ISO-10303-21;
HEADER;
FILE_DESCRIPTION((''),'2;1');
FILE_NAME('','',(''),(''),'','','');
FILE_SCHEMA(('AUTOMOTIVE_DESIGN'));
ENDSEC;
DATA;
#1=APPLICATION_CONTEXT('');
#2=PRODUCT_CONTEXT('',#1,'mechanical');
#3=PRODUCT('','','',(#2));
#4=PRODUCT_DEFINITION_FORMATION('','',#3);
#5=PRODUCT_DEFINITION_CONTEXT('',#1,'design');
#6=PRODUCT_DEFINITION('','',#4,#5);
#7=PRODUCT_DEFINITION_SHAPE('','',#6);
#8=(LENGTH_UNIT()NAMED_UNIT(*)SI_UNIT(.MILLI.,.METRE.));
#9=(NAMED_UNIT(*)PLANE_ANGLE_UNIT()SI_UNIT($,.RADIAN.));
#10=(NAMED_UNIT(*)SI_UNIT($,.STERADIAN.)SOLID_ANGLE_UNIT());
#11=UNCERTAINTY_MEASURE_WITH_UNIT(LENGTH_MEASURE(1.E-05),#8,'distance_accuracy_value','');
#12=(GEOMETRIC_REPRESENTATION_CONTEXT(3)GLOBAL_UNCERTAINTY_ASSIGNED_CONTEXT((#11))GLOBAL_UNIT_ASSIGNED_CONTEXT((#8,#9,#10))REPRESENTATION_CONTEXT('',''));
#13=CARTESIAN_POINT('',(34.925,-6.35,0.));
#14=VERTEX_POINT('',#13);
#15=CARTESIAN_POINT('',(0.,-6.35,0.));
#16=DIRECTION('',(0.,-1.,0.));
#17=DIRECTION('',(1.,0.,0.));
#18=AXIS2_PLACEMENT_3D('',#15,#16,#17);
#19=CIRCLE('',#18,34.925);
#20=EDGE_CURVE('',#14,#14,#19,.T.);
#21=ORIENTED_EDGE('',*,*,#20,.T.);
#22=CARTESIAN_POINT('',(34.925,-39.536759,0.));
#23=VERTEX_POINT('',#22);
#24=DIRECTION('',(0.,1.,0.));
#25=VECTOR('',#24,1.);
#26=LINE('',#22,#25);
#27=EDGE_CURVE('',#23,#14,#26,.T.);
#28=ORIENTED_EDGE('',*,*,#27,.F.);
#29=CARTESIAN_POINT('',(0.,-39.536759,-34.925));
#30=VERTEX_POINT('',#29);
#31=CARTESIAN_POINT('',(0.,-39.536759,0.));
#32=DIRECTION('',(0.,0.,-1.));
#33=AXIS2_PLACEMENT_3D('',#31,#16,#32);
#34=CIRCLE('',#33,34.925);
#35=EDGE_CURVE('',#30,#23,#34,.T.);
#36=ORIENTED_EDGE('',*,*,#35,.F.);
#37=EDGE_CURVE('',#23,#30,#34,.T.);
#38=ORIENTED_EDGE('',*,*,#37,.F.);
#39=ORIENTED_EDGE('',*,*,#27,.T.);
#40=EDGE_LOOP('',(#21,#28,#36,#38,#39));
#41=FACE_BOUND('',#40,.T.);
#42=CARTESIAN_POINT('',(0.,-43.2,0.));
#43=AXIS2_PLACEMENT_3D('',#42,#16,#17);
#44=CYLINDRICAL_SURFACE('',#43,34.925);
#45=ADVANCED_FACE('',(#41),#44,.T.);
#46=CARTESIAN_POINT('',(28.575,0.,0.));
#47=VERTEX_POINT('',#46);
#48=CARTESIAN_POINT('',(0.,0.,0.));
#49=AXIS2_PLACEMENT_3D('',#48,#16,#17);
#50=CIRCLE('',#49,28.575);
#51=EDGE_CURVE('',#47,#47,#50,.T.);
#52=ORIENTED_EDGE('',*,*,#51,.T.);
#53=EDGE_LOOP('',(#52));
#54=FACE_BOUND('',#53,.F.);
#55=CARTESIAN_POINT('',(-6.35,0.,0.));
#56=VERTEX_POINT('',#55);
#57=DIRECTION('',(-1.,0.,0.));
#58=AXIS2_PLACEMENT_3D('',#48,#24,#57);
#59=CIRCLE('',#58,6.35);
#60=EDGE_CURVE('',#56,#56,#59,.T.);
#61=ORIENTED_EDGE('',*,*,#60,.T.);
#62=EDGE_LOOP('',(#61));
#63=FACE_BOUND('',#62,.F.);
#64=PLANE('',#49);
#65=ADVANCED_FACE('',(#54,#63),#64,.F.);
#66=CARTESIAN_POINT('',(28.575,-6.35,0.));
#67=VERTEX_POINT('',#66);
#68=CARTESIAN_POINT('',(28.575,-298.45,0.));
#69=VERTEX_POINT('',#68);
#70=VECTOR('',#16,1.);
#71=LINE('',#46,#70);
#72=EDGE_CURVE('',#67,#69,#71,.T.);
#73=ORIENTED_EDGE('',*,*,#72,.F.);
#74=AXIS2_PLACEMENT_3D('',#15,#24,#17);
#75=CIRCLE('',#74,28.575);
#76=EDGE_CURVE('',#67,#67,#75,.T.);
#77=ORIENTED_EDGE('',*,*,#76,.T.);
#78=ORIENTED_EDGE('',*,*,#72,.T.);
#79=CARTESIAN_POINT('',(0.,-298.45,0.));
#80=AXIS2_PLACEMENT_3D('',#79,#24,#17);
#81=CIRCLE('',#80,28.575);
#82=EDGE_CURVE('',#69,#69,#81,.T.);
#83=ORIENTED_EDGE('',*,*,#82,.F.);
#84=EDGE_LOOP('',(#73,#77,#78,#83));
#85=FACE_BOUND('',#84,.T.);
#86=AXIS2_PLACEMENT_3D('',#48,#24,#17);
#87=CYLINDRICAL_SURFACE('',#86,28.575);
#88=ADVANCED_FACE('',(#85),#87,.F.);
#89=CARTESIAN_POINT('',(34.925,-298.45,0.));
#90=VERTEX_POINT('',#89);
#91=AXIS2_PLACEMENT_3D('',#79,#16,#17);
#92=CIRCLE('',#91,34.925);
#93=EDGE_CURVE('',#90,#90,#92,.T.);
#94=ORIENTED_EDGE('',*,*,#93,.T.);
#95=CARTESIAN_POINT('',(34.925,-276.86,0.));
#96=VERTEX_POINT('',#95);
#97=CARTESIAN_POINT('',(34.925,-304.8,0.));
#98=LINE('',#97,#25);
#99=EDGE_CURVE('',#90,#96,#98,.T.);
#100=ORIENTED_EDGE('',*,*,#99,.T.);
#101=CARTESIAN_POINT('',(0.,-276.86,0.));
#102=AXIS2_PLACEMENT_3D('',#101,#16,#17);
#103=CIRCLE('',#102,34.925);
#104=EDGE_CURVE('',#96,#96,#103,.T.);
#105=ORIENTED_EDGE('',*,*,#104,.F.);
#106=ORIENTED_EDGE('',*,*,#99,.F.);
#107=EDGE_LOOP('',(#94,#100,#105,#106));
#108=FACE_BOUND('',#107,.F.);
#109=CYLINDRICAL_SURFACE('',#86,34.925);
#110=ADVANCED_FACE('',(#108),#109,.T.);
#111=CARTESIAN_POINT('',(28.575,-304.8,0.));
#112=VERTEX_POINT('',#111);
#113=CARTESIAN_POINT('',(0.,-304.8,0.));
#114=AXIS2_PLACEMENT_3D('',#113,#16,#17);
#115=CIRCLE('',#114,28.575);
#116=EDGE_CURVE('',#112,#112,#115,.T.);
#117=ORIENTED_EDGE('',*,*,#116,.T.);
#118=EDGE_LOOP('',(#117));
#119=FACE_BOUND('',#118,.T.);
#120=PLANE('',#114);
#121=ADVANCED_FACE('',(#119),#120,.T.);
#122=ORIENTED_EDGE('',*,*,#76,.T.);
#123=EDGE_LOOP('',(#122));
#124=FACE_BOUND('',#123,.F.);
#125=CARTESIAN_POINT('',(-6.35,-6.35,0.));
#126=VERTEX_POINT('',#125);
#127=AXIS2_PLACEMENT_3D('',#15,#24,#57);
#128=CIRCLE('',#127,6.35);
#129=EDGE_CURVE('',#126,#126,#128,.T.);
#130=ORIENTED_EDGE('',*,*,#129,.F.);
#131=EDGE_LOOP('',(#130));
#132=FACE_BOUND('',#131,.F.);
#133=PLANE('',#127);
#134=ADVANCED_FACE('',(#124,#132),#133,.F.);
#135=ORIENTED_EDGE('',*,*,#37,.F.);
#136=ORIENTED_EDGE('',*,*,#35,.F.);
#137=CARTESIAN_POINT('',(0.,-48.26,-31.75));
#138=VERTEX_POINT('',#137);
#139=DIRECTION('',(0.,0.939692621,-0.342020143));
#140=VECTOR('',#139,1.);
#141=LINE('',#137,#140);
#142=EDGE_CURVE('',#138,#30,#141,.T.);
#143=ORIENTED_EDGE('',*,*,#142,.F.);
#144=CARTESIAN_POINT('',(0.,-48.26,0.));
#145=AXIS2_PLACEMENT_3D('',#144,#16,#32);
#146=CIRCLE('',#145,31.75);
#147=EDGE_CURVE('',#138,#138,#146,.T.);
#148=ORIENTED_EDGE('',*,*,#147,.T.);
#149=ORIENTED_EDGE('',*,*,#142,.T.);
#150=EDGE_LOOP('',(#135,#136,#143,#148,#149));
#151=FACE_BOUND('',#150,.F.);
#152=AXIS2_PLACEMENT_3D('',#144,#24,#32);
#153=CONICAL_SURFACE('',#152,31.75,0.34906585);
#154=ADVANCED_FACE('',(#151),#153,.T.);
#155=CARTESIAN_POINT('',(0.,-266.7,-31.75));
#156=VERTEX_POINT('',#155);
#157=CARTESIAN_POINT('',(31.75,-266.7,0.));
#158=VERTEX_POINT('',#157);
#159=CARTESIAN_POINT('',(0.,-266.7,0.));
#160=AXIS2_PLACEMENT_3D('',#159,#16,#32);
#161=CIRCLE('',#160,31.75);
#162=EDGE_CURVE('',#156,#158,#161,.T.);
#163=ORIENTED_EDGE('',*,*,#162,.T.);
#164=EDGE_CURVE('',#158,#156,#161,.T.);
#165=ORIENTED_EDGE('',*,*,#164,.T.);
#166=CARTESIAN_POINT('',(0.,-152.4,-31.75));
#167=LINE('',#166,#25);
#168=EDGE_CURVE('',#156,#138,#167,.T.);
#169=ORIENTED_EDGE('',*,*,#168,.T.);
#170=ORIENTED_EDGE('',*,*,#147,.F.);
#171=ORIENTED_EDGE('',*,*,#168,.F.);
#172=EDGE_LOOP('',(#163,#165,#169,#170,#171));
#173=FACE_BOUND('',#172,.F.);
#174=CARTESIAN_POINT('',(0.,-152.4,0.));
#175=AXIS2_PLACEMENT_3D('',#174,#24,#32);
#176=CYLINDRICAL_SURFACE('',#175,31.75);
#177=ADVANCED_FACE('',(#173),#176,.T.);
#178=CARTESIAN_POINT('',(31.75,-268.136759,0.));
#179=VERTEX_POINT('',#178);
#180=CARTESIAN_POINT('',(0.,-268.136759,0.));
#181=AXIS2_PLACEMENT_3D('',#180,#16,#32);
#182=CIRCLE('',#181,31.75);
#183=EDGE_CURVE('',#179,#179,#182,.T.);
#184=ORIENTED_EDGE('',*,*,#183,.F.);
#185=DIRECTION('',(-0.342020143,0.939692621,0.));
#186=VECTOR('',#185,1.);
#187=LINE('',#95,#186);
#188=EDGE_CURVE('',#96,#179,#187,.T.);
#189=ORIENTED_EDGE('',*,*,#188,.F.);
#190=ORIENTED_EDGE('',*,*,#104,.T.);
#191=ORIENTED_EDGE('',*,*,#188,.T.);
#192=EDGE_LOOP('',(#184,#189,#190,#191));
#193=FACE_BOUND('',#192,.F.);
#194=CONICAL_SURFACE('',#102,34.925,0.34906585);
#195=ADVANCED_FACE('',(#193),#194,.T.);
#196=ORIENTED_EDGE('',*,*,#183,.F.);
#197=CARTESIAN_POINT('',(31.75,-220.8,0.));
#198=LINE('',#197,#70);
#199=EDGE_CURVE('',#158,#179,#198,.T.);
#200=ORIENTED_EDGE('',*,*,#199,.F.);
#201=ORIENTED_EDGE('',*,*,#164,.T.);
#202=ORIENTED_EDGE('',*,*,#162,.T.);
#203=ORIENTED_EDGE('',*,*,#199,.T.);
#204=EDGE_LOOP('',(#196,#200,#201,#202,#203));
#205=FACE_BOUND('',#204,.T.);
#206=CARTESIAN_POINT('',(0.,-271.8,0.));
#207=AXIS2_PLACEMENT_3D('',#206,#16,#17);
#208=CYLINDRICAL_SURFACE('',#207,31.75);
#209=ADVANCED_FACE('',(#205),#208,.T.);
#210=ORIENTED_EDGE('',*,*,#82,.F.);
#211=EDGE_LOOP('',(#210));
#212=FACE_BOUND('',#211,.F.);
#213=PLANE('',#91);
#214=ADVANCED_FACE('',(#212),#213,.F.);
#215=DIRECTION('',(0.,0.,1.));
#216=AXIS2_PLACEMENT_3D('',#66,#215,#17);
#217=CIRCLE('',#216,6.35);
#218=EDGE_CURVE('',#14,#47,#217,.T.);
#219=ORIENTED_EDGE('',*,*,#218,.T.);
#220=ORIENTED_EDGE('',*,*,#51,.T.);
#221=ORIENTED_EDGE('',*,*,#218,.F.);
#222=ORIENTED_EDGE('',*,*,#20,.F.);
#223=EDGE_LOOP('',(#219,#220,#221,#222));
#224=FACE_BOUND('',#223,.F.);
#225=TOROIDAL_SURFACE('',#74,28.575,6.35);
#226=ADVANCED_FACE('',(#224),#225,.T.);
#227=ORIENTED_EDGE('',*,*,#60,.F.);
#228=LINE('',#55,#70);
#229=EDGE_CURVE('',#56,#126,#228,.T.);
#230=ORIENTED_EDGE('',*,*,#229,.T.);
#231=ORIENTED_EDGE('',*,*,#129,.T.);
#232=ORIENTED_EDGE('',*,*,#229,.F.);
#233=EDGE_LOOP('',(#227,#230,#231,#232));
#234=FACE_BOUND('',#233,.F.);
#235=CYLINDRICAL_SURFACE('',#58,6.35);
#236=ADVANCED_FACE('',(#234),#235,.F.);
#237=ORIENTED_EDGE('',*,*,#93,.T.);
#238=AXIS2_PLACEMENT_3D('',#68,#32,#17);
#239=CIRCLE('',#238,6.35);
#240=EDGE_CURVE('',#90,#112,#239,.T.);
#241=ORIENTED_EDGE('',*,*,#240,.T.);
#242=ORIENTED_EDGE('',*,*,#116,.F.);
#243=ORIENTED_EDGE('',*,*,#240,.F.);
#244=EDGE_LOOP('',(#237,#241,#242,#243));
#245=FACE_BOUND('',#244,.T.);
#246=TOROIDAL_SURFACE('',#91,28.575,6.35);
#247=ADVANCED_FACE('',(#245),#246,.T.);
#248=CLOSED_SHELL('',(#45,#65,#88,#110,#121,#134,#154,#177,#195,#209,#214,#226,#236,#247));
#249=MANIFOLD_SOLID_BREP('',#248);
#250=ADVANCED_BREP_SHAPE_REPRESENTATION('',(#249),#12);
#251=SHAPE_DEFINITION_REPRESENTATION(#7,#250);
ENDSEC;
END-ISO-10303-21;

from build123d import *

# Parameters (mm, degrees)
F0_R          = 34.925
F0_R_2        = 28.575
F1_DEPTH      = 304.8
F2_R          = 34.925
F3_DEPTH      = 6.35
F4_R          = 34.925
F5_DEPTH      = 6.35
F6_R          = 6.35
F7_R          = 6.35
F8_W          = 228.6
F8_H          = 3.175
F10_S5_R      = 34.925
F10_T6_DEPTH  = 52
F10_S11_R     = 31.75
F10_T12_DEPTH = 51
F11_R         = 6.35
F12_DEPTH     = 25.4


# Not quite as in the source:
# - a fillet or chamfer that OpenCascade refuses, or shapes differently, is made with other operations: its cross-section is extruded or revolved along the edge and cut away or added


with BuildPart() as f1:
    # F0 (on Front) → F1 (new body)
    with BuildSketch(Plane.XZ):
        Circle(F0_R)
        Circle(F0_R_2, mode=Mode.SUBTRACT)
    extrude(amount=F1_DEPTH)

    # F2 (on face) → F3 (join)
    with BuildSketch(Plane.XZ.offset(304.8)):
        Circle(F2_R)
    extrude(amount=-F3_DEPTH)

    # F4 (on face) → F5 (join)
    with BuildSketch(Plane(origin=(0, 0, 0), x_dir=(-1, 0, 0), z_dir=(0, 1, 0))):
        Circle(F4_R)
    extrude(amount=-F5_DEPTH)

    # F6
    f6_edges = [f1.edges().sort_by_distance(p)[0] for p in [
        (-34.925, 0, 0),
    ]]
    fillet(f6_edges, radius=F6_R)

    # F7
    f7_edges = [f1.edges().sort_by_distance(p)[0] for p in [
        (-34.925, -304.8, 0),
    ]]
    fillet(f7_edges, radius=F7_R)

    # F8 (on Right) → F9 (revolve, cut)
    with BuildSketch(Plane.YZ):
        with Locations((-152.4, -33.3375)):
            Rectangle(F8_W, F8_H)
    revolve(axis=Axis((0, -304.8, 0), (0, -1, 0)), mode=Mode.SUBTRACT)

    # F10: chamfer of 10.16 x 3.6979375801 on 2 edges, made by hand


with BuildPart() as f10_tool2:
    # F10_s3 → F10_t4 (revolve)
    with BuildSketch(Plane.YZ):
        Polygon((-48.26, -31.75), (-38.1, -35.4479375801), (-38.1, -31.75), align=None)
    revolve(axis=Axis((0, -38.1, 0), (0, -1, 0)))

    # F10_s5 → F10_t6 (intersect, symmetric)
    with BuildSketch(Plane.XZ.offset(43.2)):
        Circle(F10_S5_R)
    extrude(amount=F10_T6_DEPTH, both=True, mode=Mode.INTERSECT)


with BuildPart() as f1_1:
    add(f1.part)

    # F10_t1: union F10_tool2
    add(f10_tool2.part)


with BuildPart() as f10_tool8:
    # F10_s9 → F10_t10 (revolve)
    with BuildSketch(Plane.XY):
        Polygon((34.925, -276.86), (31.2270624199, -266.7), (34.925, -266.7), align=None)
    revolve(axis=Axis((0, -266.7, 0), (0, -1, 0)))

    # F10_s11 → F10_t12 (cut, symmetric)
    with BuildSketch(Plane.XZ.offset(271.8)):
        Circle(F10_S11_R)
    extrude(amount=F10_T12_DEPTH, both=True, mode=Mode.SUBTRACT)


with BuildPart() as f1_2:
    add(f1_1.part)

    # F10_t7: cut F10_tool8
    add(f10_tool8.part, mode=Mode.SUBTRACT)

    # F11 (on face) → F12 (cut)
    with BuildSketch(Plane(origin=(0, 0, 0), x_dir=(-1, 0, 0), z_dir=(0, 1, 0))):
        Circle(F11_R)
    extrude(amount=-F12_DEPTH, mode=Mode.SUBTRACT)


solid = f1_2.part
